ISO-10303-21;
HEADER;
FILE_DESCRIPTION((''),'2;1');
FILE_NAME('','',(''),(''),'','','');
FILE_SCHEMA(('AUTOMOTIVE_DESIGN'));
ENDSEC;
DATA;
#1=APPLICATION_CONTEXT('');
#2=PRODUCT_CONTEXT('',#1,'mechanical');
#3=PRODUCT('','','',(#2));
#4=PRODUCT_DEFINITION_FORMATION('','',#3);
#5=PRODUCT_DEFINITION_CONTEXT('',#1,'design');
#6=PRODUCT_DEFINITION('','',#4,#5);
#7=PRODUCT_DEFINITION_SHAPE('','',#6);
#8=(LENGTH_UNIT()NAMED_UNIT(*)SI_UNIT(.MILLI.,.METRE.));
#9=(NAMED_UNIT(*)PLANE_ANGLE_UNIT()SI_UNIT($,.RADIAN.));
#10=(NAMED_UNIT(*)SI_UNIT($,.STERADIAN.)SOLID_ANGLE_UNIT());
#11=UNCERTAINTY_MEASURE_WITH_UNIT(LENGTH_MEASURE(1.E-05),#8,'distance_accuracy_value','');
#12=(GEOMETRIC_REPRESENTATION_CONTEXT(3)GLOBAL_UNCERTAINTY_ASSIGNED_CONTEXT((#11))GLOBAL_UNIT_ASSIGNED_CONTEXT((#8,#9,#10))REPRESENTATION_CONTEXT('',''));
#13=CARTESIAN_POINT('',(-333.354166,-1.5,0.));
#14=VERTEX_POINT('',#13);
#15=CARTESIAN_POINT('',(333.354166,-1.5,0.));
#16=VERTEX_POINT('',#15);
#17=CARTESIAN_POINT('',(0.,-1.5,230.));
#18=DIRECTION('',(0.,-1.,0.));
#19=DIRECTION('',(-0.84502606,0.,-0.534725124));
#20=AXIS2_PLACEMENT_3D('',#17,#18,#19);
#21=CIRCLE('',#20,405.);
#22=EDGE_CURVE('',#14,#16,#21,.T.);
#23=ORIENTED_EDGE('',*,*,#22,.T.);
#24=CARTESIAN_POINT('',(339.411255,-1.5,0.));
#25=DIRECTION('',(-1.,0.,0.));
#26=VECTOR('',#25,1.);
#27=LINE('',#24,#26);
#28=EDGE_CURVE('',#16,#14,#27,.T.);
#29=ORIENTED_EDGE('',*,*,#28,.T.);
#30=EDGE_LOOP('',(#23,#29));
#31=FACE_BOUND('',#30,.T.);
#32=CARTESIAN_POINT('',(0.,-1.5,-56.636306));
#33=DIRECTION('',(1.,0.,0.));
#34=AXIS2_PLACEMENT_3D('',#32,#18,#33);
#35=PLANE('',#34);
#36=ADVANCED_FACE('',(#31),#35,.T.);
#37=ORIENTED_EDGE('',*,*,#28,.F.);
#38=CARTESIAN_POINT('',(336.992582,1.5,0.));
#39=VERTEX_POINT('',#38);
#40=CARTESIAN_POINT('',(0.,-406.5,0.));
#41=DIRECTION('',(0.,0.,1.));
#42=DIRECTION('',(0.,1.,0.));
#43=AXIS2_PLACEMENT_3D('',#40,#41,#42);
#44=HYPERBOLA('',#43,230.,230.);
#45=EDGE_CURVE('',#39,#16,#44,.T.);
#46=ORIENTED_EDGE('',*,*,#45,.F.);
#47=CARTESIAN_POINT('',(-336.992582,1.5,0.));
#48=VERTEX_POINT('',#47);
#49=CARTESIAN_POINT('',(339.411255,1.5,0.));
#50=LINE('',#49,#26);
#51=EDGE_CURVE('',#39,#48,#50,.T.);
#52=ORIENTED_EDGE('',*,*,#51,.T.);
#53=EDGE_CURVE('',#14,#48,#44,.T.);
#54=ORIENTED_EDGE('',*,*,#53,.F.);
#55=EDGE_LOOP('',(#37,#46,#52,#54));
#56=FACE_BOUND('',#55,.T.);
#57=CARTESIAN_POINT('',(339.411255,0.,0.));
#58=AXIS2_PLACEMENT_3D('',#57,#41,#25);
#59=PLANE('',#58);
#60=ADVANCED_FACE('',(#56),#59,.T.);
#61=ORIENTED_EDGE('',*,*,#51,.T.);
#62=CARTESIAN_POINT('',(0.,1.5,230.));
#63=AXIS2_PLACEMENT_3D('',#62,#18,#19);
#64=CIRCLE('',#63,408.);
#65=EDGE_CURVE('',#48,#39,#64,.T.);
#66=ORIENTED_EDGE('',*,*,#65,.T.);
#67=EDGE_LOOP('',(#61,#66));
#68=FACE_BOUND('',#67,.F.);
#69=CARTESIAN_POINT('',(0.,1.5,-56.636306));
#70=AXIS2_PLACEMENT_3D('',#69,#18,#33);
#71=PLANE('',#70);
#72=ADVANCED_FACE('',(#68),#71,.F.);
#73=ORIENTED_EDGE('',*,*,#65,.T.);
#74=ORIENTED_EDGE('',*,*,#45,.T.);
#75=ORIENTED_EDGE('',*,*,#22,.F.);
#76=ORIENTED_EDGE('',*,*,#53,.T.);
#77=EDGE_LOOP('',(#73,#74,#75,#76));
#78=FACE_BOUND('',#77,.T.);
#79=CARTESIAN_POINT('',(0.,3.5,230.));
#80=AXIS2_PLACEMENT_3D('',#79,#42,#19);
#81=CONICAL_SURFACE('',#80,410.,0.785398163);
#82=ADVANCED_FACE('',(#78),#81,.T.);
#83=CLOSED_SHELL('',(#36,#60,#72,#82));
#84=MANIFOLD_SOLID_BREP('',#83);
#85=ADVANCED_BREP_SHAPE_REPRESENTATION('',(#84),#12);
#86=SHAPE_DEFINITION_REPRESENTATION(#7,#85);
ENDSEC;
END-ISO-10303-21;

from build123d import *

# Parameters (mm, degrees)
F1_DEPTH    = 1.5
F2_T2_ANGLE = 115.349456206


# Not quite as in the source:
# - a fillet or chamfer that OpenCascade refuses, or shapes differently, is made with other operations: its cross-section is extruded or revolved along the edge and cut away or added


with BuildPart() as f1:
    # F0 (on Front) → F1 (new body, symmetric)
    with BuildSketch(Plane.XZ):
        with BuildLine():
            Line((-244.4200636844, 0), (-339.4112549695, 0))
            ThreePointArc((-339.4112549695, 0), (0, -180), (339.4112549695, 0))
            Line((339.4112549695, 0), (244.4200636844, 0))
            Line((244.4200636844, 0), (254.9738643102, -19.003536996))
            Line((254.9738643102, -19.003536996), (269.4112549695, -45))
            Line((269.4112549695, -45), (239.6748409289, -45))
            Line((239.6748409289, -45), (199.4112549695, -45))
            Line((199.4112549695, -45), (159.1476690102, -45))
            Line((159.1476690102, -45), (129.4112549695, -45))
            Line((129.4112549695, -45), (143.8486452746, -19.0035376339))
            Line((143.8486452746, -19.0035376339), (154.4024462547, 0))
            Line((154.4024462547, 0), (0, 0))
            Line((0, 0), (-154.4024462547, 0))
            Line((-154.4024462547, 0), (-143.8486450184, -19.0035380952))
            Line((-143.8486450184, -19.0035380952), (-129.4112549695, -45))
            Line((-129.4112549695, -45), (-159.1476690102, -45))
            Line((-159.1476690102, -45), (-199.4112549695, -45))
            Line((-199.4112549695, -45), (-239.6748409289, -45))
            Line((-239.6748409289, -45), (-269.4112549695, -45))
            Line((-269.4112549695, -45), (-254.9738639334, -19.0035363174))
            Line((-254.9738639334, -19.0035363174), (-244.4200636844, 0))
        make_face()
        with BuildLine():
            ThreePointArc((-239.6748409289, -45), (-254.7569182799, -36.3758629314), (-254.9738639334, -19.0035363174))
            Line((-254.9738639334, -19.0035363174), (-269.4112549695, -45))
            Line((-269.4112549695, -45), (-239.6748409289, -45))
        make_face()
        with BuildLine():
            Line((-129.4112549695, -45), (-143.8486450184, -19.0035380952))
            ThreePointArc((-143.8486450184, -19.0035380952), (-142.2068467182, -23.1115446827), (-141.6476690102, -27.5))
            ThreePointArc((-141.6476690102, -27.5), (-146.7733003394, -39.8743686708), (-159.1476690102, -45))
            Line((-159.1476690102, -45), (-129.4112549695, -45))
        make_face()
        with BuildLine():
            ThreePointArc((159.1476690102, -45), (144.065592041, -36.3758635803), (143.8486452746, -19.0035376339))
            Line((143.8486452746, -19.0035376339), (129.4112549695, -45))
            Line((129.4112549695, -45), (159.1476690102, -45))
        make_face()
        with BuildLine():
            Line((269.4112549695, -45), (254.9738643102, -19.003536996))
            ThreePointArc((254.9738643102, -19.003536996), (256.6156630632, -23.1115440741), (257.1748409289, -27.5))
            ThreePointArc((257.1748409289, -27.5), (252.0492095997, -39.8743686708), (239.6748409289, -45))
            Line((239.6748409289, -45), (269.4112549695, -45))
        make_face()
        with BuildLine():
            ThreePointArc((176.6476690102, -27.5), (163.5361245829, -10.5591777742), (143.8486452746, -19.0035376339))
            ThreePointArc((143.8486452746, -19.0035376339), (144.065592041, -36.3758635803), (159.1476690102, -45))
            ThreePointArc((159.1476690102, -45), (171.5220376809, -39.8743686708), (176.6476690102, -27.5))
        make_face()
        with BuildLine():
            Line((199.4112549695, -45), (199.4112549695, 0))
            Line((199.4112549695, 0), (154.4024462547, 0))
            Line((154.4024462547, 0), (143.8486452746, -19.0035376339))
            ThreePointArc((143.8486452746, -19.0035376339), (163.5361245829, -10.5591777742), (176.6476690102, -27.5))
            ThreePointArc((176.6476690102, -27.5), (171.5220376809, -39.8743686708), (159.1476690102, -45))
            Line((159.1476690102, -45), (199.4112549695, -45))
        make_face()
        with BuildLine():
            Line((254.9738643102, -19.003536996), (244.4200636844, 0))
            Line((244.4200636844, 0), (199.4112549695, 0))
            Line((199.4112549695, 0), (199.4112549695, -45))
            Line((199.4112549695, -45), (239.6748409289, -45))
            ThreePointArc((239.6748409289, -45), (224.5927637747, -18.6241367341), (254.9738643102, -19.003536996))
        make_face()
        with BuildLine():
            ThreePointArc((257.1748409289, -27.5), (256.6156630632, -23.1115440741), (254.9738643102, -19.003536996))
            ThreePointArc((254.9738643102, -19.003536996), (224.5927637747, -18.6241367341), (239.6748409289, -45))
            ThreePointArc((239.6748409289, -45), (252.0492095997, -39.8743686708), (257.1748409289, -27.5))
        make_face()
        with BuildLine():
            ThreePointArc((-222.1748409289, -27.5), (-235.2863846273, -10.559177963), (-254.9738639334, -19.0035363174))
            ThreePointArc((-254.9738639334, -19.0035363174), (-254.7569182799, -36.3758629314), (-239.6748409289, -45))
            ThreePointArc((-239.6748409289, -45), (-227.3004722581, -39.8743686708), (-222.1748409289, -27.5))
        make_face()
        with BuildLine():
            Line((-199.4112549695, 0), (-244.4200636844, 0))
            Line((-244.4200636844, 0), (-254.9738639334, -19.0035363174))
            ThreePointArc((-254.9738639334, -19.0035363174), (-235.2863846273, -10.559177963), (-222.1748409289, -27.5))
            ThreePointArc((-222.1748409289, -27.5), (-227.3004722581, -39.8743686708), (-239.6748409289, -45))
            Line((-239.6748409289, -45), (-199.4112549695, -45))
            Line((-199.4112549695, -45), (-199.4112549695, 0))
        make_face()
        with BuildLine():
            Line((-154.4024462547, 0), (-199.4112549695, 0))
            Line((-199.4112549695, 0), (-199.4112549695, -45))
            Line((-199.4112549695, -45), (-159.1476690102, -45))
            ThreePointArc((-159.1476690102, -45), (-174.2297458455, -18.6241361923), (-143.8486450184, -19.0035380952))
            Line((-143.8486450184, -19.0035380952), (-154.4024462547, 0))
        make_face()
        with BuildLine():
            ThreePointArc((-141.6476690102, -27.5), (-142.2068467182, -23.1115446827), (-143.8486450184, -19.0035380952))
            ThreePointArc((-143.8486450184, -19.0035380952), (-174.2297458455, -18.6241361923), (-159.1476690102, -45))
            ThreePointArc((-159.1476690102, -45), (-146.7733003394, -39.8743686708), (-141.6476690102, -27.5))
        make_face()
    extrude(amount=F1_DEPTH, both=True)

    # F2: chamfer of 5 on 1 edges, made by hand

    # F2_s1 → F2_t2 (revolve, cut)
    with BuildSketch(Plane(origin=(-103.9270328196, 0, 164.2358796947), x_dir=(0, 1, 0), z_dir=(-0.5347251236, 0, 0.84502606))):
        Polygon((3.5, 287.0132215633), (-1.5, 282.0132215633), (-1.5, 287.0132215633), align=None)
    revolve(axis=Axis((0, -1.5, 230), (0, -1, 0)), revolution_arc=F2_T2_ANGLE, mode=Mode.SUBTRACT)


solid = f1.part
